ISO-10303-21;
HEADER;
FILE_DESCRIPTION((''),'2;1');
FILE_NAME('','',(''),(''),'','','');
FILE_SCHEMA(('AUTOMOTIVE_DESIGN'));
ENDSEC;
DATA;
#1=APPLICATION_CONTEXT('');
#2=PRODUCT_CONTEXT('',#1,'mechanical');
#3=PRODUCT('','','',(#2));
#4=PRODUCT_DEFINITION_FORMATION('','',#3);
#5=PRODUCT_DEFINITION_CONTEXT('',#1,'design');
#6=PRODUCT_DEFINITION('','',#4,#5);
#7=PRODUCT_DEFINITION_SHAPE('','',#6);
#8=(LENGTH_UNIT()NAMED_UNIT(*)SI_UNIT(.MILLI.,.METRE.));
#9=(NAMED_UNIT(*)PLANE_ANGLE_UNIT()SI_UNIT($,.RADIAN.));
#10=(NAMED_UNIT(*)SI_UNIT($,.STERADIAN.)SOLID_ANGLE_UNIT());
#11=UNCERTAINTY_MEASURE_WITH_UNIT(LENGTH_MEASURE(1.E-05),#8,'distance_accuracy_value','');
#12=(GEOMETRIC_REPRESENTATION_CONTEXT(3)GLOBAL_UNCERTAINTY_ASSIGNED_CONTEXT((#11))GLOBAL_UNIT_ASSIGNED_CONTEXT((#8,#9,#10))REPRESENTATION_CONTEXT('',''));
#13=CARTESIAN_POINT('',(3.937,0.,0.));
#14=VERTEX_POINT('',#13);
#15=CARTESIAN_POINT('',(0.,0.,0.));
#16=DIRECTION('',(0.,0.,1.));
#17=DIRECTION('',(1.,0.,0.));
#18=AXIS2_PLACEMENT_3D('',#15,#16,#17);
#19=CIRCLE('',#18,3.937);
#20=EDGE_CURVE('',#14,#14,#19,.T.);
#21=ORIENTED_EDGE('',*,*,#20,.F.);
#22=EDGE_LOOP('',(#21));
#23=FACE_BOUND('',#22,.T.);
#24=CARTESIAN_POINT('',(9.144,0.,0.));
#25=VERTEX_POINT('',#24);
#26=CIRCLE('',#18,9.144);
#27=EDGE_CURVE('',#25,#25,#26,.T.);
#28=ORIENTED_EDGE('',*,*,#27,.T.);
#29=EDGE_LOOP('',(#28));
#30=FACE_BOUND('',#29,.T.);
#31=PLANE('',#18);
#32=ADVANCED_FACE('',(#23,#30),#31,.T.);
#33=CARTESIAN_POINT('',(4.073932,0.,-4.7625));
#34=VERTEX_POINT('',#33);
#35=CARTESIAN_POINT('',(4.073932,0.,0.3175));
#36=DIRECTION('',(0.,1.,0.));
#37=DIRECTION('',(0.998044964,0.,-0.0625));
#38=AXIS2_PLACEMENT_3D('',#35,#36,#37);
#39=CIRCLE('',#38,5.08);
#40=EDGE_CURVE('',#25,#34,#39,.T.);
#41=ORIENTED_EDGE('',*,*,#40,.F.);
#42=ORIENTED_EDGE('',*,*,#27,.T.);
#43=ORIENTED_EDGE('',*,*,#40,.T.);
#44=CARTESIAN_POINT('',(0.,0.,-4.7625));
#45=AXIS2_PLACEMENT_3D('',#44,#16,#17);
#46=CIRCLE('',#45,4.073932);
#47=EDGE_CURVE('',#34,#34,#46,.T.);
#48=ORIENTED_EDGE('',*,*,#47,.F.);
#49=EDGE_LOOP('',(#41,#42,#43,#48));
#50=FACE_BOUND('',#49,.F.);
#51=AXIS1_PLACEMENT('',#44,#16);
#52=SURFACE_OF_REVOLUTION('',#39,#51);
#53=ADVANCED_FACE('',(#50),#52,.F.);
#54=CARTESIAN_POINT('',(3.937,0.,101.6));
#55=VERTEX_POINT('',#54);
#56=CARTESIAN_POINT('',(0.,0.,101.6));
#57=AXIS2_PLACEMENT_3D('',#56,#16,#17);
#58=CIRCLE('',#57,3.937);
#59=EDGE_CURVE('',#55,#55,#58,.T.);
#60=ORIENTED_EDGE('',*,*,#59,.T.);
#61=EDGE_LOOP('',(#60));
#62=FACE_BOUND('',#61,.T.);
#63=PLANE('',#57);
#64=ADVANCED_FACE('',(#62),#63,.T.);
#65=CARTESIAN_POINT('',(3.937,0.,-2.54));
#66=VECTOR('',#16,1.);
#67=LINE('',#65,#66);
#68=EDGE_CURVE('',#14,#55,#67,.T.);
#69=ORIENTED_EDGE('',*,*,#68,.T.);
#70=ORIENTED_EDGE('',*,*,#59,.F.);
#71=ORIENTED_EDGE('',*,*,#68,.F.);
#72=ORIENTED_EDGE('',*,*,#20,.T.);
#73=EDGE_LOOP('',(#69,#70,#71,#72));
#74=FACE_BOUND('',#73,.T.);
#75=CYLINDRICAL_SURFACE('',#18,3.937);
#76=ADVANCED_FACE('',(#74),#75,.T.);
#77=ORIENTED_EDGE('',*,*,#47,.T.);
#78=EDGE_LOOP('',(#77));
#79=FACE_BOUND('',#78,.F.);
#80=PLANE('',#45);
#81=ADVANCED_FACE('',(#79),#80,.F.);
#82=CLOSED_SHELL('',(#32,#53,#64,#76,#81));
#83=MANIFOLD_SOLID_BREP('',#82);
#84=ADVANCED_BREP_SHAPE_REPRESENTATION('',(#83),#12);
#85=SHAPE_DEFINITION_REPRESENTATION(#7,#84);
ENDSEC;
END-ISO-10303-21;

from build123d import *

# Parameters (mm, degrees)
F0_R          = 3.937
F1_DEPTH      = 101.6
F1_DEPTH_BACK = 2.54
F0_R_2        = 9.144
F2_DEPTH      = 4.7625


# Not quite as in the source:
# - a fillet or chamfer that OpenCascade refuses, or shapes differently, is made with other operations: its cross-section is extruded or revolved along the edge and cut away or added


with BuildPart() as f1:
    # F0 (on Top) → F1 (new body, two sides)
    with BuildSketch(Plane.XY) as f1_sk:
        Circle(F0_R)
    extrude(amount=F1_DEPTH)
    extrude(f1_sk.sketch, amount=-F1_DEPTH_BACK)

    # F0 (on Top) → F2 (join)
    with BuildSketch(Plane.XY):
        Circle(F0_R_2)
        Circle(F0_R, mode=Mode.SUBTRACT)
        Circle(F0_R)
    extrude(amount=-F2_DEPTH)

    # F3: fillet of radius 5.08 on 1 edges, made by hand

    # F3_s1 → F3_t2 (revolve, cut)
    with BuildSketch(Plane.XZ):
        with BuildLine():
            ThreePointArc((9.144, 0), (7.5519698235, -3.3851544532), (4.0739315833, -4.7625))
            Line((4.0739315833, -4.7625), (9.144, -4.7625))
            Line((9.144, -4.7625), (9.144, 0))
        make_face()
    revolve(axis=Axis((0, 0, -4.7625), (0, 0, 1)), mode=Mode.SUBTRACT)


solid = f1.part
